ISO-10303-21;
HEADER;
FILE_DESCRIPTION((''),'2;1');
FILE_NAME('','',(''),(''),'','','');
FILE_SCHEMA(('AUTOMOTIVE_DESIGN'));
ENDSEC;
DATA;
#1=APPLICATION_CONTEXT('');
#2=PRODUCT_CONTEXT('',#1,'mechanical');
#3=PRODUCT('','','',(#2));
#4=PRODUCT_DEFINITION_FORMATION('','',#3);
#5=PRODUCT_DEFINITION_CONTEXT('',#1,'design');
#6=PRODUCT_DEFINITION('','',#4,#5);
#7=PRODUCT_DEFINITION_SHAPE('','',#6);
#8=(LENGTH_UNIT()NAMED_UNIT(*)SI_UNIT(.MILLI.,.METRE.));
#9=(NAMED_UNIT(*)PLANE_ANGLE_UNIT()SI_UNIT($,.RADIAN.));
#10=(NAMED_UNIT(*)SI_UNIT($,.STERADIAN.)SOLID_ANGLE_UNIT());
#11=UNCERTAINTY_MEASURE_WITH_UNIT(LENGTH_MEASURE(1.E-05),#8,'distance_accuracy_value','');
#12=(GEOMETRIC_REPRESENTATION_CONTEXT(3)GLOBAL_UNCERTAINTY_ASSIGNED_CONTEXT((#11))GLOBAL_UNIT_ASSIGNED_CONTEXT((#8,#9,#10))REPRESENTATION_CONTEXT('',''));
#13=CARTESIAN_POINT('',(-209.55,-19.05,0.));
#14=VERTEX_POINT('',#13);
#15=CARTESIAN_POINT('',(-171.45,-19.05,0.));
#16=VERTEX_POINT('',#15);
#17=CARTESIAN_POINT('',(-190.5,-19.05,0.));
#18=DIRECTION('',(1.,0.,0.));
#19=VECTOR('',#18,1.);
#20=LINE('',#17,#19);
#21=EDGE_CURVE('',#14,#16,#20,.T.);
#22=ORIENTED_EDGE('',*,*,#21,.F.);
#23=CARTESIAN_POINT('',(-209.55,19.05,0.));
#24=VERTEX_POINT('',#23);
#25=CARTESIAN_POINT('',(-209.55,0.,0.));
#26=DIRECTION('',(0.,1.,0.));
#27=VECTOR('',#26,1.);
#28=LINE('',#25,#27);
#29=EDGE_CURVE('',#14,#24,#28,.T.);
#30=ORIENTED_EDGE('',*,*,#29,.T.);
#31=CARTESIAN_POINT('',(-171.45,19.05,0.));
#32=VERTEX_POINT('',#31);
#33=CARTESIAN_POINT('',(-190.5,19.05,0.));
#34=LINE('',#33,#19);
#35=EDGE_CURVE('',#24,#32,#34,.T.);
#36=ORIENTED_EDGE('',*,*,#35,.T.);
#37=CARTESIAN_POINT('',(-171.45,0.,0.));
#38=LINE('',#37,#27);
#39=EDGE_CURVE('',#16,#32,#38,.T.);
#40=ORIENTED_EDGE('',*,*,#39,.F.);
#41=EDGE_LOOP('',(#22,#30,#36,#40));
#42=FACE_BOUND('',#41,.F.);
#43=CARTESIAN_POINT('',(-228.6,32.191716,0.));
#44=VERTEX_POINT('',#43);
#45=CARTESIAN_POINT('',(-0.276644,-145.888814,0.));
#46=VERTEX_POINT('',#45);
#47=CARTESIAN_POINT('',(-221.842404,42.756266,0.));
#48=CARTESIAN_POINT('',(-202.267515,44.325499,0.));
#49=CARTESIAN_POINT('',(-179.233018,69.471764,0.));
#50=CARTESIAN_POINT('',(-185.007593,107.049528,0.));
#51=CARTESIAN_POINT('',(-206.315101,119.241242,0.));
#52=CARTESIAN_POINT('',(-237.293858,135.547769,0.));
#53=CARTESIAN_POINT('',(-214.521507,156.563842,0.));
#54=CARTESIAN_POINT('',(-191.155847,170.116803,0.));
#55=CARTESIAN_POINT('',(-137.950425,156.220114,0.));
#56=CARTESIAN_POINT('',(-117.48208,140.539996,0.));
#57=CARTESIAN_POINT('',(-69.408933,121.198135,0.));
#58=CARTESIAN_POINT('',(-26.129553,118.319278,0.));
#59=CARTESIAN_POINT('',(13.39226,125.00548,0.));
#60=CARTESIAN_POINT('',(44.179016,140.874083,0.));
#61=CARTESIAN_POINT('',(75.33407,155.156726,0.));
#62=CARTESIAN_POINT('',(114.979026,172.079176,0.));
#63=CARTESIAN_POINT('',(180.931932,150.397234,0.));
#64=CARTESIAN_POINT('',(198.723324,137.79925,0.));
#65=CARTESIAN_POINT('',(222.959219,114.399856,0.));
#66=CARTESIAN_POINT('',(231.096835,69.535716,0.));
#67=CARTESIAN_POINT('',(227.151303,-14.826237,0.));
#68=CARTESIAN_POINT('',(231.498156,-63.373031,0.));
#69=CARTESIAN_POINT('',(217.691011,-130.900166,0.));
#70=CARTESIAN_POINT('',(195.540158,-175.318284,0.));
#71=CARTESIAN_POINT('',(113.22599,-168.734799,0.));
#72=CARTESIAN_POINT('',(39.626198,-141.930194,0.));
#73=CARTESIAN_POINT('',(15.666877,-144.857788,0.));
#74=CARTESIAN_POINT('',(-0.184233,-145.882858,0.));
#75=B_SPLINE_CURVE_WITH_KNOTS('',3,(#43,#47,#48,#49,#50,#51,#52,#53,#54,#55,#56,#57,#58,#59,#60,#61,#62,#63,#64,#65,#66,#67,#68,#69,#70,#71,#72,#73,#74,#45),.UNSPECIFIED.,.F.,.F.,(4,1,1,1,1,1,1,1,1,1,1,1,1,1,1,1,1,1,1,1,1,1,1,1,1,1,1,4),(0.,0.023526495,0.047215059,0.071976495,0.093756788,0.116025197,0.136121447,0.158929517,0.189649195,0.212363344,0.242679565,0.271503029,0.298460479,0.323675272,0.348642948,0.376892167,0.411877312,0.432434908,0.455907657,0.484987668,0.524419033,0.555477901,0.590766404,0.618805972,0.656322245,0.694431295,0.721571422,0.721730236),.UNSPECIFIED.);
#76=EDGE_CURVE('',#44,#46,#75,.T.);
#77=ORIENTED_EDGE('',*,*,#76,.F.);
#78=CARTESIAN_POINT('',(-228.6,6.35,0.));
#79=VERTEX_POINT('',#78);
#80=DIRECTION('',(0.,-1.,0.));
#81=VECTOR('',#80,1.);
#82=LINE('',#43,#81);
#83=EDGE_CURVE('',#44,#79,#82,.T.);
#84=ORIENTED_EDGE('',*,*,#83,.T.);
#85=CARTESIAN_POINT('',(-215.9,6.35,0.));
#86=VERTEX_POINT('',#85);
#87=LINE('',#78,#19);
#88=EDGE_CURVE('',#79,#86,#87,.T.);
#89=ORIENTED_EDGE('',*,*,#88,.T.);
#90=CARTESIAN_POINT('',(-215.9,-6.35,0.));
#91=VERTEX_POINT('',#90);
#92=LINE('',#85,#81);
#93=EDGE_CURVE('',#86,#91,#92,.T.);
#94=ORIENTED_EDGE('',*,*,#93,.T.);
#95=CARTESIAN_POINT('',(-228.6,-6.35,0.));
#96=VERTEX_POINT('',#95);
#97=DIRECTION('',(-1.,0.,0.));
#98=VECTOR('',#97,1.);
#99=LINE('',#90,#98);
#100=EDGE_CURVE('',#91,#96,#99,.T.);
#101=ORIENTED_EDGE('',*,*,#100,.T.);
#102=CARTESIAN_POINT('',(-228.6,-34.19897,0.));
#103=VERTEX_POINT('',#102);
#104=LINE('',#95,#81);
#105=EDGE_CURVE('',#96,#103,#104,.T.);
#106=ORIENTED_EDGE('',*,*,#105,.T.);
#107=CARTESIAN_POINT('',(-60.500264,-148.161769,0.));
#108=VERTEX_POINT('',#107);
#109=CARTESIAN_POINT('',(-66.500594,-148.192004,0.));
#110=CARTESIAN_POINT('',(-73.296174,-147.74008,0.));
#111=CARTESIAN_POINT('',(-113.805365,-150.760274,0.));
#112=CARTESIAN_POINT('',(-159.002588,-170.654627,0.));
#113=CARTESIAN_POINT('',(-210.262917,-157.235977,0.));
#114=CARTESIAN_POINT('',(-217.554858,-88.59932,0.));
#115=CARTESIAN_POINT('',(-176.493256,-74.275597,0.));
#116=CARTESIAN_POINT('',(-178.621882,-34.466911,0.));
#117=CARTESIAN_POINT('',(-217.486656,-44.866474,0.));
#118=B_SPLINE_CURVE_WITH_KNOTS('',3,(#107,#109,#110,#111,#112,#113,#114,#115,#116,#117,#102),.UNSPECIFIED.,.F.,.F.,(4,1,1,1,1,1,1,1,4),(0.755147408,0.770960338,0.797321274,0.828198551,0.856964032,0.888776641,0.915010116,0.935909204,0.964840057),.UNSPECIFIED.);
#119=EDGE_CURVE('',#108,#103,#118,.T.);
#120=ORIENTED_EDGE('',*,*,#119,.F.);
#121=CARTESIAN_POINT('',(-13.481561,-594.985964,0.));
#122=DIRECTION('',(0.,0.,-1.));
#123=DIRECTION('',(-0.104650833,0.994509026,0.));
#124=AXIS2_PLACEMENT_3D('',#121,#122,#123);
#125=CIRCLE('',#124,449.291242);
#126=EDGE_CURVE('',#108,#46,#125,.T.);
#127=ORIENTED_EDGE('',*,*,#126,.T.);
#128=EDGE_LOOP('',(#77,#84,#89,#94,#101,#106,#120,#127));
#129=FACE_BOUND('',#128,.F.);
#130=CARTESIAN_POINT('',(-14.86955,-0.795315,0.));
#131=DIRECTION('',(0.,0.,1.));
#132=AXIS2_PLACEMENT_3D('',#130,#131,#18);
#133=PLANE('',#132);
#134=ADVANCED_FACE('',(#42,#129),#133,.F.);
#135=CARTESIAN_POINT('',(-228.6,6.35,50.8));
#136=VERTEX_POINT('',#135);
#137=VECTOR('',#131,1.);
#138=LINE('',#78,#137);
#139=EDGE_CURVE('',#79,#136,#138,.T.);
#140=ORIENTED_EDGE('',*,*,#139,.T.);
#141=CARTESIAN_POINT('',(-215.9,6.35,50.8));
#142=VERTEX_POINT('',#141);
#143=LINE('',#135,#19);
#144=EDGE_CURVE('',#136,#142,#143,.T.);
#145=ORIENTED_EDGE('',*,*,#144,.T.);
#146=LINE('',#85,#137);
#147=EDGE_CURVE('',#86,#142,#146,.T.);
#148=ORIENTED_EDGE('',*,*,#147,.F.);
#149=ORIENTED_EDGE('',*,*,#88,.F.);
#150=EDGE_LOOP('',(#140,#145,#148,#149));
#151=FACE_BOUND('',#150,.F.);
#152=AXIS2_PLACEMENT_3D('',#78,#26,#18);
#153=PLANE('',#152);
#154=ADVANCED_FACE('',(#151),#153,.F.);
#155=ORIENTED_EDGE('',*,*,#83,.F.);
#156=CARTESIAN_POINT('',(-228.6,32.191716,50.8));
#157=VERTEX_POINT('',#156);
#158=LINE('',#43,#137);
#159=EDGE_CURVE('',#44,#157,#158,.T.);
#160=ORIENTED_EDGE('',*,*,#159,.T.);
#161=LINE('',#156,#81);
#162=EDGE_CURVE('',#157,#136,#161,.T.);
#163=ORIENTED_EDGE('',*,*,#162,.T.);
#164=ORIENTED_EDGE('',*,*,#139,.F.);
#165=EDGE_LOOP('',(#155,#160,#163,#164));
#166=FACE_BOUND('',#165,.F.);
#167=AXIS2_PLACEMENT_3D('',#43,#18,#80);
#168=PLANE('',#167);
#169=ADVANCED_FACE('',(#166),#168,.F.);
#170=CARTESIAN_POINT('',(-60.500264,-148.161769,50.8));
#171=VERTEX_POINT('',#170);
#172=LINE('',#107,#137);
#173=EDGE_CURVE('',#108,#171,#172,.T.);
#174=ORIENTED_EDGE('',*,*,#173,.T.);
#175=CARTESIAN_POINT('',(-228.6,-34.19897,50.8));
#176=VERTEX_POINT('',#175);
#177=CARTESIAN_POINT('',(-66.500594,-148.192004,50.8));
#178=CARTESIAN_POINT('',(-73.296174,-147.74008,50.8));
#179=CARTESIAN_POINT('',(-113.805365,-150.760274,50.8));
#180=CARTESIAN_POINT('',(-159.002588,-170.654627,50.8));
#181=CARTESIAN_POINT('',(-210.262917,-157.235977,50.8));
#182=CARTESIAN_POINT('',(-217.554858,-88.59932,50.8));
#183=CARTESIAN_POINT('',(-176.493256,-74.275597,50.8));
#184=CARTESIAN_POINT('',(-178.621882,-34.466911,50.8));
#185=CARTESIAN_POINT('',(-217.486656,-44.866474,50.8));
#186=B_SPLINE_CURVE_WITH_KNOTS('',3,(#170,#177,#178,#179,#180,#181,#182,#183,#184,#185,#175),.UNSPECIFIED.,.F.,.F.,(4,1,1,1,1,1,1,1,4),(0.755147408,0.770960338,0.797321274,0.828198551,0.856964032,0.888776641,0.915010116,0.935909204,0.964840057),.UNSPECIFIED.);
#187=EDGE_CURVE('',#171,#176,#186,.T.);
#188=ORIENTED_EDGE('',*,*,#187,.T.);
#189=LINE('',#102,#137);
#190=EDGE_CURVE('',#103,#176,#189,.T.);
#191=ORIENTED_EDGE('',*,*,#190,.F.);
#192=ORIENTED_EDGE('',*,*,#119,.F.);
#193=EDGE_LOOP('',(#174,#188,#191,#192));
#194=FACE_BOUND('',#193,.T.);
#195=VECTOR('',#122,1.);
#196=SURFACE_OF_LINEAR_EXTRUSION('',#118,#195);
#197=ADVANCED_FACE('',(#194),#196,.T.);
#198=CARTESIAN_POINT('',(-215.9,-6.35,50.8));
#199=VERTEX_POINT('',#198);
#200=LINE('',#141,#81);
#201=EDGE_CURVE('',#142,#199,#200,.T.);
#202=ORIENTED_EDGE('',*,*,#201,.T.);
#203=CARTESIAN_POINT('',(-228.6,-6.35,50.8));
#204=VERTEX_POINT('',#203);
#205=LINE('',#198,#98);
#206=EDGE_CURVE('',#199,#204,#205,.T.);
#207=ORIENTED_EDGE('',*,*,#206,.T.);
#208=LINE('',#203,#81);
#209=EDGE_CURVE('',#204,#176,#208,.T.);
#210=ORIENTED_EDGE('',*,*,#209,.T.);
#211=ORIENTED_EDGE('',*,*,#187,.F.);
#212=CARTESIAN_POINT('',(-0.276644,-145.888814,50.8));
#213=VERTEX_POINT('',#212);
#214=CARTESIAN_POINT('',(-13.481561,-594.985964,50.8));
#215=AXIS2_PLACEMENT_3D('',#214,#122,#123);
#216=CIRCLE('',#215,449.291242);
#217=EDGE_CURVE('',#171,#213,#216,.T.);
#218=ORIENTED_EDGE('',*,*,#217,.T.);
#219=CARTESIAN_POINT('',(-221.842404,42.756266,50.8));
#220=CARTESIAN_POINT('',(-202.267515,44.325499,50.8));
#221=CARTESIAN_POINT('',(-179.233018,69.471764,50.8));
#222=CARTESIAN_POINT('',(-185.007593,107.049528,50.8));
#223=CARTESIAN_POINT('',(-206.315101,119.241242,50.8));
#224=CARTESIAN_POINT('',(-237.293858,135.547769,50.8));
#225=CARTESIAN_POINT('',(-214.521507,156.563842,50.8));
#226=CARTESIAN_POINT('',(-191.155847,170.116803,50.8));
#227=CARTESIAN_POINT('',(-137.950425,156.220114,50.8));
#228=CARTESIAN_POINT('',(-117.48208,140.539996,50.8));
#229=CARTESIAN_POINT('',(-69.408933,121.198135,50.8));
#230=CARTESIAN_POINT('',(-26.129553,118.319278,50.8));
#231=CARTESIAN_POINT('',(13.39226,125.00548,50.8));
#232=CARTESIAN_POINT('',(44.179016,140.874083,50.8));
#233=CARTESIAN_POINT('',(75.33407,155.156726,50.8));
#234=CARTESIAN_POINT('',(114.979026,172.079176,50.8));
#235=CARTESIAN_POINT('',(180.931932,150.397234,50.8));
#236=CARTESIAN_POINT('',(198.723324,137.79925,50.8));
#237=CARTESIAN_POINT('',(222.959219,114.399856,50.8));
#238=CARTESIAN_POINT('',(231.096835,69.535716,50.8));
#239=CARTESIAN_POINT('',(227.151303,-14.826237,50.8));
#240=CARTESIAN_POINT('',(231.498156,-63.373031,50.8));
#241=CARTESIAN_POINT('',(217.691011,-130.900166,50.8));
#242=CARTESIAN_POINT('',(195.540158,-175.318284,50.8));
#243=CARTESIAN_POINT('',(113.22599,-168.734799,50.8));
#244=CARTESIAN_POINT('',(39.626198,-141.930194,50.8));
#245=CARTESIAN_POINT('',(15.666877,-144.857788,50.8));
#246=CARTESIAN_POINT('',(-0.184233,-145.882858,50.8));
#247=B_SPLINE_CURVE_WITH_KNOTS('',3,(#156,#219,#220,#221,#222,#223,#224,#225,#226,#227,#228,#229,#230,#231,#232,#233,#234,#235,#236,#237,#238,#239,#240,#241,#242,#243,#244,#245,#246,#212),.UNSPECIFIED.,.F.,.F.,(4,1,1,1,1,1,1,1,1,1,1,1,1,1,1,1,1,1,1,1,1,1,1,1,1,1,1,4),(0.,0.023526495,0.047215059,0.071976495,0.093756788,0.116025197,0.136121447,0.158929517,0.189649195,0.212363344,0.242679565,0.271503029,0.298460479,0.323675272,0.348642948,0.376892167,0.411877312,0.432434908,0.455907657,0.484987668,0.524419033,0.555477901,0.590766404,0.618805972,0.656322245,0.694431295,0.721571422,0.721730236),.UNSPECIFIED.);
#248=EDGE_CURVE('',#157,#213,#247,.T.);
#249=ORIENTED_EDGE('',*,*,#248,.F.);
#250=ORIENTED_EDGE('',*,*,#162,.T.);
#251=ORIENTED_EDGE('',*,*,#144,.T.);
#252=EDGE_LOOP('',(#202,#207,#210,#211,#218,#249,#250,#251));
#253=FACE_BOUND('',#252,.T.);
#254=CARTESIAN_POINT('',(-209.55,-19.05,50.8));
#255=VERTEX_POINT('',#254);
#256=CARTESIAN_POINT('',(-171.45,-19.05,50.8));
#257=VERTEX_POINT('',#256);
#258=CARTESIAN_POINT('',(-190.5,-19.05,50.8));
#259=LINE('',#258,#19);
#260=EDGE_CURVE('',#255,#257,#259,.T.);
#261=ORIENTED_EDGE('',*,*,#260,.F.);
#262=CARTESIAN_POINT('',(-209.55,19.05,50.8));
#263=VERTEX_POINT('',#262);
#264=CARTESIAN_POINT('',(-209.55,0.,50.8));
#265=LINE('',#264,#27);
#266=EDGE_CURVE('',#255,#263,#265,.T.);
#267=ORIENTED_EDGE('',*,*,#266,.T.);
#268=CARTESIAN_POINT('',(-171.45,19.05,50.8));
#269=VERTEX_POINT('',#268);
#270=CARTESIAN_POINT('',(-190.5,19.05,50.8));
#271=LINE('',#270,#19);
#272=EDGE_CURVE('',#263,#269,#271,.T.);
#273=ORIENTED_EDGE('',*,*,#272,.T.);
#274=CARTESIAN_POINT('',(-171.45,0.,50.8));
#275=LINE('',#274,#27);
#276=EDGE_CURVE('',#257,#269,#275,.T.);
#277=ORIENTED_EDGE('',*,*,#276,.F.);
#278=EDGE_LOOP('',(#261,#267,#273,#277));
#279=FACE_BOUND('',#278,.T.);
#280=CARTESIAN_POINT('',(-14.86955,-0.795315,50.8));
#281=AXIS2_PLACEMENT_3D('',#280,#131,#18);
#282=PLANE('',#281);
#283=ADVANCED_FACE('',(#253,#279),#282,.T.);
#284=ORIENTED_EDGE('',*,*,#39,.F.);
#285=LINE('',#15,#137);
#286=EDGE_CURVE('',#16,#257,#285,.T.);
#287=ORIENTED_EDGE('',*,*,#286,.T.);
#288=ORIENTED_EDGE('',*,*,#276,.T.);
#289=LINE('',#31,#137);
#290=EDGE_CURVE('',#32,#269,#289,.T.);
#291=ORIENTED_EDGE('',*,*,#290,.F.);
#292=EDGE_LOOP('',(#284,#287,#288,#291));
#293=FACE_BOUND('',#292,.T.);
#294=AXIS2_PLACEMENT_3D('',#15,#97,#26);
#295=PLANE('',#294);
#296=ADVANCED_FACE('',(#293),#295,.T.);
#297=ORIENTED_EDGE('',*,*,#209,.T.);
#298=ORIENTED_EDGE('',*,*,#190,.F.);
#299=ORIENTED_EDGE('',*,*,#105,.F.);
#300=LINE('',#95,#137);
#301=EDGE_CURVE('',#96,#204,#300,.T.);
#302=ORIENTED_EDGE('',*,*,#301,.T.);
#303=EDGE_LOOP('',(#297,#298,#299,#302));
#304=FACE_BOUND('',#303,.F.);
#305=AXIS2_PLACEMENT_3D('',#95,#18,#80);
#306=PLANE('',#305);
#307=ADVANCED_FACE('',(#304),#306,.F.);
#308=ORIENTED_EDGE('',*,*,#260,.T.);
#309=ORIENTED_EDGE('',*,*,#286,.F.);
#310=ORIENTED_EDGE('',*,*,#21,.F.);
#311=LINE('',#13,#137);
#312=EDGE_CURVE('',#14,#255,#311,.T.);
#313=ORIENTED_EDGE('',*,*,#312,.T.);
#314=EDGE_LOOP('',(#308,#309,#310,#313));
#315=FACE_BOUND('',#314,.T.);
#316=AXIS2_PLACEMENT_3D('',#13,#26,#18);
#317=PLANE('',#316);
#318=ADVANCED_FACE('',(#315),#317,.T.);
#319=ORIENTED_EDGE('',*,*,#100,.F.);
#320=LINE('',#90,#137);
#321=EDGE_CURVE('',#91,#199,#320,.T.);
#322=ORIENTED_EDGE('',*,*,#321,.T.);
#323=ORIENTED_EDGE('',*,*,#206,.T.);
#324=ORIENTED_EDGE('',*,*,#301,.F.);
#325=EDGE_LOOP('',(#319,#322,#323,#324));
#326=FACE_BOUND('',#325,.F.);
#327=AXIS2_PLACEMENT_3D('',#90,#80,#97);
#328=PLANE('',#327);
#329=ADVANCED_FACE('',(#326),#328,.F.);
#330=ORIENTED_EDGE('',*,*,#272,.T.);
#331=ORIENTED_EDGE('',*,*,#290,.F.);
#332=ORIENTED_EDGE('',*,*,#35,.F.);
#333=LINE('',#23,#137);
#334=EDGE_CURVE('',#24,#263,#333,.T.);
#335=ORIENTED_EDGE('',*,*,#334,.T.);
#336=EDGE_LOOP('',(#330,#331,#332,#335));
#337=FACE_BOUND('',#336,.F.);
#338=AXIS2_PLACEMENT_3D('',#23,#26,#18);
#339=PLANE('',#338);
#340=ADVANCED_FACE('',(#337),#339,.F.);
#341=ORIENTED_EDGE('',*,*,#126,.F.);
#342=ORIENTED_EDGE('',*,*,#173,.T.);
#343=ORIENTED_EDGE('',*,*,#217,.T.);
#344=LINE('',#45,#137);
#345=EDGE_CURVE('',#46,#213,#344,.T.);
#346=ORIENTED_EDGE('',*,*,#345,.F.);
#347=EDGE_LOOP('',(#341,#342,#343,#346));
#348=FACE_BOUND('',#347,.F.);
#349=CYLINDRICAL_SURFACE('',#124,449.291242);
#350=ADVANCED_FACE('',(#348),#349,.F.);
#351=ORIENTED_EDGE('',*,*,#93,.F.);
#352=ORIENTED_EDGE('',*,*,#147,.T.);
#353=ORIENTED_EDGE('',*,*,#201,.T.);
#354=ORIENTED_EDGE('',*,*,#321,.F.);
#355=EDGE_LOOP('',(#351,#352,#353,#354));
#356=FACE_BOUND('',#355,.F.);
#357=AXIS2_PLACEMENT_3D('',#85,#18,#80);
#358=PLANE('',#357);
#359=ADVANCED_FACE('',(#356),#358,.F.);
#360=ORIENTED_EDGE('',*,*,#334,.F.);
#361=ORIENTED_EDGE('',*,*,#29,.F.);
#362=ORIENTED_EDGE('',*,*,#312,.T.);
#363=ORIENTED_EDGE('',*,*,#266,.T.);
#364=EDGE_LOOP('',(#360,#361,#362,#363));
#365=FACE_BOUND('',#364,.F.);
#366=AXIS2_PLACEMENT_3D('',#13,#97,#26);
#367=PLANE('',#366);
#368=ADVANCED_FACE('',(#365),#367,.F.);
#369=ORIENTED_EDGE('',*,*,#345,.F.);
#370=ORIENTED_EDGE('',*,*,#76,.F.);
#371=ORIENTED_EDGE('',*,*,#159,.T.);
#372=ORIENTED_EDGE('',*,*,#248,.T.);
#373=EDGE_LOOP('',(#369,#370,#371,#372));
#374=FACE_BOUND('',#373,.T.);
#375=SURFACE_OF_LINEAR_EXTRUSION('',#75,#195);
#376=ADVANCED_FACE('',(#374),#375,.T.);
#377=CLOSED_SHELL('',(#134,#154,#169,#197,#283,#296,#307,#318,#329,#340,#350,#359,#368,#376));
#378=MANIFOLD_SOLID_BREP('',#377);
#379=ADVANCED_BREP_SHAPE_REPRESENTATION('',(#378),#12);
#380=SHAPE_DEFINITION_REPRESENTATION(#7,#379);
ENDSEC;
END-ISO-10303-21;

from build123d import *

# Parameters (mm, degrees)
F0_W     = 38.1
F0_H     = 38.1
F1_DEPTH = 50.8


with BuildPart() as f1:
    # F0 (on Top) → F1 (new body)
    with BuildSketch(Plane.XY):
        with BuildLine():
            Line((-228.6, 32.1917161345), (-228.6, 6.35))
            Line((-228.6, 6.35), (-215.9, 6.35))
            Line((-215.9, 6.35), (-215.9, -6.35))
            Line((-215.9, -6.35), (-228.6, -6.35))
            Line((-228.6, -6.35), (-228.6, -34.1989696026))
            add(Edge.make_bspline(
                [(-60.5002641678, -148.1617689133), (-66.5005939975, -148.1920038294), (-73.2961742589, -147.7400798137), (-113.8053654337, -150.7602742609), (-159.0025882902, -170.6546271451), (-210.2629173909, -157.2359768705), (-217.554857804, -88.5993198257), (-176.493256404, -74.2755969971), (-178.6218818379, -34.4669105888), (-217.486655562, -44.8664744461), (-228.6, -34.1989696026)],
                knots=[0.7551474079, 0.7551474079, 0.7551474079, 0.7551474079, 0.7709603375, 0.797321274, 0.8281985508, 0.8569640319, 0.8887766406, 0.9150101165, 0.9359092043, 0.9648400573, 0.9648400573, 0.9648400573, 0.9648400573], degree=3))
            ThreePointArc((-60.5002641678, -148.1617689133), (-30.426607809, -146.014377891), (-0.2766438162, -145.8888142753))
            add(Edge.make_bspline(
                [(-228.6, 32.1917161345), (-221.842404284, 42.7562656596), (-202.2675149277, 44.3254987929), (-179.2330180071, 69.4717636205), (-185.0075932705, 107.0495276869), (-206.3151011845, 119.2412421658), (-237.2938577645, 135.5477688838), (-214.5215066994, 156.5638416404), (-191.1558469206, 170.1168033125), (-137.9504249958, 156.2201135467), (-117.4820801505, 140.5399957432), (-69.4089325992, 121.1981346936), (-26.1295527608, 118.3192775912), (13.3922603976, 125.0054796597), (44.1790163062, 140.8740829992), (75.3340703353, 155.1567259182), (114.979025581, 172.0791756849), (180.9319317383, 150.3972339265), (198.7233235329, 137.7992502734), (222.9592193706, 114.3998560963), (231.0968349346, 69.5357158437), (227.151302935, -14.8262371264), (231.4981557673, -63.3730305184), (217.6910113022, -130.9001658988), (195.5401577855, -175.3182842089), (113.225990128, -168.7347991647), (39.6261978432, -141.9301941848), (15.666877208, -144.8577880121), (-0.1842328972, -145.8828575521), (-0.2766438162, -145.8888142753)],
                knots=[0, 0, 0, 0, 0.023526495, 0.0472150591, 0.071976495, 0.0937567881, 0.1160251968, 0.1361214471, 0.1589295174, 0.1896491945, 0.2123633437, 0.2426795653, 0.2715030285, 0.2984604786, 0.3236752725, 0.3486429477, 0.3768921666, 0.4118773119, 0.4324349076, 0.4559076572, 0.4849876683, 0.5244190328, 0.5554779008, 0.5907664036, 0.6188059718, 0.6563222449, 0.6944312953, 0.721571422, 0.7217302364, 0.7217302364, 0.7217302364, 0.7217302364], degree=3))
        make_face()
        with Locations((-190.5, 0)):
            Rectangle(F0_W, F0_H, mode=Mode.SUBTRACT)
    extrude(amount=F1_DEPTH)


solid = f1.part
